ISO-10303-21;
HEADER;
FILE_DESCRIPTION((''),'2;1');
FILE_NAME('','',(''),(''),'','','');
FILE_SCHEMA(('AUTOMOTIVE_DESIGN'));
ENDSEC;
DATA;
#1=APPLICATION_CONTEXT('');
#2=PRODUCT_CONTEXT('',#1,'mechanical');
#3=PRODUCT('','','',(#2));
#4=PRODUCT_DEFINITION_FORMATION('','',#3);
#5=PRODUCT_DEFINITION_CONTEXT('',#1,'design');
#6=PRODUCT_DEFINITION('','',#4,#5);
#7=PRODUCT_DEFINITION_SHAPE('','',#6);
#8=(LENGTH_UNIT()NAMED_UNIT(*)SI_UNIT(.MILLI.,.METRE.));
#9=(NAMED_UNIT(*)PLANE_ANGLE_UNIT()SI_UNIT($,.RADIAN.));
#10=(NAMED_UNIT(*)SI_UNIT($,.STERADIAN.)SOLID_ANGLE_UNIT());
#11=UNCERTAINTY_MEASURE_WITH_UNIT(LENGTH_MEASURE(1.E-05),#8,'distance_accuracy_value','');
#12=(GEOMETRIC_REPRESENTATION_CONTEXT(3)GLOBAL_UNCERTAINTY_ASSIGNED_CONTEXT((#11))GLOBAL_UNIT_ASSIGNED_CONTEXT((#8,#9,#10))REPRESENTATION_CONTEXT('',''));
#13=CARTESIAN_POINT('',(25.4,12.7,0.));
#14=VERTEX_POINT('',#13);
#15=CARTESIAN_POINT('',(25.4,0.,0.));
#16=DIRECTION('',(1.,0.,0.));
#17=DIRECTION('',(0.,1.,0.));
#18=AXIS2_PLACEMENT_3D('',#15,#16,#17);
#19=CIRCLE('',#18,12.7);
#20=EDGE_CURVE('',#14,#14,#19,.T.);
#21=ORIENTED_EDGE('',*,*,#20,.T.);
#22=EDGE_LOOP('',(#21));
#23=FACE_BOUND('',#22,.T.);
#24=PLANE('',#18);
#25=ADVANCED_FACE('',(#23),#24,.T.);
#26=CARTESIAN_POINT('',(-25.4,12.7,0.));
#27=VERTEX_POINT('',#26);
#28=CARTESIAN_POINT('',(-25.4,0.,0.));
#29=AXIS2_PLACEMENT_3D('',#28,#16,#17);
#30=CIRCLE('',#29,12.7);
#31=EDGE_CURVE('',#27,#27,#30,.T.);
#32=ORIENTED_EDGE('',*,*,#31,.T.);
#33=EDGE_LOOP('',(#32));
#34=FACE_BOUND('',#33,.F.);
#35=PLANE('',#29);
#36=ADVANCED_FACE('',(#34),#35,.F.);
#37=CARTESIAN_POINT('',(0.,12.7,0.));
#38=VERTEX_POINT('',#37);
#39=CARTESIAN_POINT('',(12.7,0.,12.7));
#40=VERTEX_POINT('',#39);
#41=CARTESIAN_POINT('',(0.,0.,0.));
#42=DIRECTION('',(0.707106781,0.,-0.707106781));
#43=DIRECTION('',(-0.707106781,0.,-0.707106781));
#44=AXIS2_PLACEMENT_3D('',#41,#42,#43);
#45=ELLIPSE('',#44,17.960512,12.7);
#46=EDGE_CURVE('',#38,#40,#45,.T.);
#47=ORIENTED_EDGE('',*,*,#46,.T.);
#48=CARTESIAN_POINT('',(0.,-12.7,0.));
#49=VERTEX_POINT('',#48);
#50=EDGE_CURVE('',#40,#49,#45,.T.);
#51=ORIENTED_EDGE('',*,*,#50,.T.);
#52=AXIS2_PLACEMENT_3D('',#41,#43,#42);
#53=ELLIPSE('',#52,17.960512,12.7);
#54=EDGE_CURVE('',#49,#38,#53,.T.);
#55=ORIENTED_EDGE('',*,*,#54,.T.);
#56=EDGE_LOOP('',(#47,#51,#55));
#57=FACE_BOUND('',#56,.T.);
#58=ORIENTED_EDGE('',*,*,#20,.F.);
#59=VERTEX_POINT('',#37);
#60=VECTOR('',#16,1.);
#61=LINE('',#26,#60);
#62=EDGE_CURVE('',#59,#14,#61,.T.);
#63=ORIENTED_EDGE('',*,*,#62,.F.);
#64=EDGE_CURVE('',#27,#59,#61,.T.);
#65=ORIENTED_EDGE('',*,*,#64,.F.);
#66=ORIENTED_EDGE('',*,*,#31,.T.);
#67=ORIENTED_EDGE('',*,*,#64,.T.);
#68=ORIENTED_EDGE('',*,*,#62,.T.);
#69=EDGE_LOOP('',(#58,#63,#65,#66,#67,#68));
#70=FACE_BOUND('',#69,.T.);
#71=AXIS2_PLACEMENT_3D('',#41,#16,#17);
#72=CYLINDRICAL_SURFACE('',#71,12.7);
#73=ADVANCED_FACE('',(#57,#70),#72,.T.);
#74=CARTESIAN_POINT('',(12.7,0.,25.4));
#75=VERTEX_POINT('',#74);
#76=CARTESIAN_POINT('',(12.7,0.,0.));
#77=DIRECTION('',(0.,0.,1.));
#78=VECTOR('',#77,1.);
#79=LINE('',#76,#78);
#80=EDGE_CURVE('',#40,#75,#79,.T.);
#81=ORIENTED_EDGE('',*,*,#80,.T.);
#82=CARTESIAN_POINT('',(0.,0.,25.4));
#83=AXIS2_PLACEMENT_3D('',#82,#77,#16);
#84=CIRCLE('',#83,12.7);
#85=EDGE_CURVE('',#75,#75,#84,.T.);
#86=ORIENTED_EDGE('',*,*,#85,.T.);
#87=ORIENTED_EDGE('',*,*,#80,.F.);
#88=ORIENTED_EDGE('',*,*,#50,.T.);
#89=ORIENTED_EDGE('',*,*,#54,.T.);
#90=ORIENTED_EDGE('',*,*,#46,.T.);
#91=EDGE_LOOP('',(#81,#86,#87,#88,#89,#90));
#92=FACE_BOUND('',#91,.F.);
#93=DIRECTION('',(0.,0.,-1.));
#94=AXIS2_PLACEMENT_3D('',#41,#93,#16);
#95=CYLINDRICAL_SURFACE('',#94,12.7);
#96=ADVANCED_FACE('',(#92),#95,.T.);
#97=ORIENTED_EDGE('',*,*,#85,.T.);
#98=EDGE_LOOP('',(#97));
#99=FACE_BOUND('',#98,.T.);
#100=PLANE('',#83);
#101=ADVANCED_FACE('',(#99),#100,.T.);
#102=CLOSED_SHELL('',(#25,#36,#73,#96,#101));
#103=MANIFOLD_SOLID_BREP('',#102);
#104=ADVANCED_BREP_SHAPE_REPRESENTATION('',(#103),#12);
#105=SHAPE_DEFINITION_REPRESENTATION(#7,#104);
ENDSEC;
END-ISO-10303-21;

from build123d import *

# Parameters (mm, degrees)
F2_R     = 12.7
F3_DEPTH = 25.4
F5_R     = 12.7
F6_DEPTH = 25.4


# Not quite as in the source:
# - the program builds the solid bodies; features that only make, move or delete a surface that nothing else refers to are left out


with BuildPart() as f3:
    # F2 (on Top) → F3 (new body)
    with BuildSketch(Plane.XY):
        Circle(F2_R)
    extrude(amount=F3_DEPTH)

    # F5 (on Right) → F6 (join, symmetric)
    with BuildSketch(Plane.YZ):
        Circle(F5_R)
    extrude(amount=F6_DEPTH, both=True)


solid = f3.part
